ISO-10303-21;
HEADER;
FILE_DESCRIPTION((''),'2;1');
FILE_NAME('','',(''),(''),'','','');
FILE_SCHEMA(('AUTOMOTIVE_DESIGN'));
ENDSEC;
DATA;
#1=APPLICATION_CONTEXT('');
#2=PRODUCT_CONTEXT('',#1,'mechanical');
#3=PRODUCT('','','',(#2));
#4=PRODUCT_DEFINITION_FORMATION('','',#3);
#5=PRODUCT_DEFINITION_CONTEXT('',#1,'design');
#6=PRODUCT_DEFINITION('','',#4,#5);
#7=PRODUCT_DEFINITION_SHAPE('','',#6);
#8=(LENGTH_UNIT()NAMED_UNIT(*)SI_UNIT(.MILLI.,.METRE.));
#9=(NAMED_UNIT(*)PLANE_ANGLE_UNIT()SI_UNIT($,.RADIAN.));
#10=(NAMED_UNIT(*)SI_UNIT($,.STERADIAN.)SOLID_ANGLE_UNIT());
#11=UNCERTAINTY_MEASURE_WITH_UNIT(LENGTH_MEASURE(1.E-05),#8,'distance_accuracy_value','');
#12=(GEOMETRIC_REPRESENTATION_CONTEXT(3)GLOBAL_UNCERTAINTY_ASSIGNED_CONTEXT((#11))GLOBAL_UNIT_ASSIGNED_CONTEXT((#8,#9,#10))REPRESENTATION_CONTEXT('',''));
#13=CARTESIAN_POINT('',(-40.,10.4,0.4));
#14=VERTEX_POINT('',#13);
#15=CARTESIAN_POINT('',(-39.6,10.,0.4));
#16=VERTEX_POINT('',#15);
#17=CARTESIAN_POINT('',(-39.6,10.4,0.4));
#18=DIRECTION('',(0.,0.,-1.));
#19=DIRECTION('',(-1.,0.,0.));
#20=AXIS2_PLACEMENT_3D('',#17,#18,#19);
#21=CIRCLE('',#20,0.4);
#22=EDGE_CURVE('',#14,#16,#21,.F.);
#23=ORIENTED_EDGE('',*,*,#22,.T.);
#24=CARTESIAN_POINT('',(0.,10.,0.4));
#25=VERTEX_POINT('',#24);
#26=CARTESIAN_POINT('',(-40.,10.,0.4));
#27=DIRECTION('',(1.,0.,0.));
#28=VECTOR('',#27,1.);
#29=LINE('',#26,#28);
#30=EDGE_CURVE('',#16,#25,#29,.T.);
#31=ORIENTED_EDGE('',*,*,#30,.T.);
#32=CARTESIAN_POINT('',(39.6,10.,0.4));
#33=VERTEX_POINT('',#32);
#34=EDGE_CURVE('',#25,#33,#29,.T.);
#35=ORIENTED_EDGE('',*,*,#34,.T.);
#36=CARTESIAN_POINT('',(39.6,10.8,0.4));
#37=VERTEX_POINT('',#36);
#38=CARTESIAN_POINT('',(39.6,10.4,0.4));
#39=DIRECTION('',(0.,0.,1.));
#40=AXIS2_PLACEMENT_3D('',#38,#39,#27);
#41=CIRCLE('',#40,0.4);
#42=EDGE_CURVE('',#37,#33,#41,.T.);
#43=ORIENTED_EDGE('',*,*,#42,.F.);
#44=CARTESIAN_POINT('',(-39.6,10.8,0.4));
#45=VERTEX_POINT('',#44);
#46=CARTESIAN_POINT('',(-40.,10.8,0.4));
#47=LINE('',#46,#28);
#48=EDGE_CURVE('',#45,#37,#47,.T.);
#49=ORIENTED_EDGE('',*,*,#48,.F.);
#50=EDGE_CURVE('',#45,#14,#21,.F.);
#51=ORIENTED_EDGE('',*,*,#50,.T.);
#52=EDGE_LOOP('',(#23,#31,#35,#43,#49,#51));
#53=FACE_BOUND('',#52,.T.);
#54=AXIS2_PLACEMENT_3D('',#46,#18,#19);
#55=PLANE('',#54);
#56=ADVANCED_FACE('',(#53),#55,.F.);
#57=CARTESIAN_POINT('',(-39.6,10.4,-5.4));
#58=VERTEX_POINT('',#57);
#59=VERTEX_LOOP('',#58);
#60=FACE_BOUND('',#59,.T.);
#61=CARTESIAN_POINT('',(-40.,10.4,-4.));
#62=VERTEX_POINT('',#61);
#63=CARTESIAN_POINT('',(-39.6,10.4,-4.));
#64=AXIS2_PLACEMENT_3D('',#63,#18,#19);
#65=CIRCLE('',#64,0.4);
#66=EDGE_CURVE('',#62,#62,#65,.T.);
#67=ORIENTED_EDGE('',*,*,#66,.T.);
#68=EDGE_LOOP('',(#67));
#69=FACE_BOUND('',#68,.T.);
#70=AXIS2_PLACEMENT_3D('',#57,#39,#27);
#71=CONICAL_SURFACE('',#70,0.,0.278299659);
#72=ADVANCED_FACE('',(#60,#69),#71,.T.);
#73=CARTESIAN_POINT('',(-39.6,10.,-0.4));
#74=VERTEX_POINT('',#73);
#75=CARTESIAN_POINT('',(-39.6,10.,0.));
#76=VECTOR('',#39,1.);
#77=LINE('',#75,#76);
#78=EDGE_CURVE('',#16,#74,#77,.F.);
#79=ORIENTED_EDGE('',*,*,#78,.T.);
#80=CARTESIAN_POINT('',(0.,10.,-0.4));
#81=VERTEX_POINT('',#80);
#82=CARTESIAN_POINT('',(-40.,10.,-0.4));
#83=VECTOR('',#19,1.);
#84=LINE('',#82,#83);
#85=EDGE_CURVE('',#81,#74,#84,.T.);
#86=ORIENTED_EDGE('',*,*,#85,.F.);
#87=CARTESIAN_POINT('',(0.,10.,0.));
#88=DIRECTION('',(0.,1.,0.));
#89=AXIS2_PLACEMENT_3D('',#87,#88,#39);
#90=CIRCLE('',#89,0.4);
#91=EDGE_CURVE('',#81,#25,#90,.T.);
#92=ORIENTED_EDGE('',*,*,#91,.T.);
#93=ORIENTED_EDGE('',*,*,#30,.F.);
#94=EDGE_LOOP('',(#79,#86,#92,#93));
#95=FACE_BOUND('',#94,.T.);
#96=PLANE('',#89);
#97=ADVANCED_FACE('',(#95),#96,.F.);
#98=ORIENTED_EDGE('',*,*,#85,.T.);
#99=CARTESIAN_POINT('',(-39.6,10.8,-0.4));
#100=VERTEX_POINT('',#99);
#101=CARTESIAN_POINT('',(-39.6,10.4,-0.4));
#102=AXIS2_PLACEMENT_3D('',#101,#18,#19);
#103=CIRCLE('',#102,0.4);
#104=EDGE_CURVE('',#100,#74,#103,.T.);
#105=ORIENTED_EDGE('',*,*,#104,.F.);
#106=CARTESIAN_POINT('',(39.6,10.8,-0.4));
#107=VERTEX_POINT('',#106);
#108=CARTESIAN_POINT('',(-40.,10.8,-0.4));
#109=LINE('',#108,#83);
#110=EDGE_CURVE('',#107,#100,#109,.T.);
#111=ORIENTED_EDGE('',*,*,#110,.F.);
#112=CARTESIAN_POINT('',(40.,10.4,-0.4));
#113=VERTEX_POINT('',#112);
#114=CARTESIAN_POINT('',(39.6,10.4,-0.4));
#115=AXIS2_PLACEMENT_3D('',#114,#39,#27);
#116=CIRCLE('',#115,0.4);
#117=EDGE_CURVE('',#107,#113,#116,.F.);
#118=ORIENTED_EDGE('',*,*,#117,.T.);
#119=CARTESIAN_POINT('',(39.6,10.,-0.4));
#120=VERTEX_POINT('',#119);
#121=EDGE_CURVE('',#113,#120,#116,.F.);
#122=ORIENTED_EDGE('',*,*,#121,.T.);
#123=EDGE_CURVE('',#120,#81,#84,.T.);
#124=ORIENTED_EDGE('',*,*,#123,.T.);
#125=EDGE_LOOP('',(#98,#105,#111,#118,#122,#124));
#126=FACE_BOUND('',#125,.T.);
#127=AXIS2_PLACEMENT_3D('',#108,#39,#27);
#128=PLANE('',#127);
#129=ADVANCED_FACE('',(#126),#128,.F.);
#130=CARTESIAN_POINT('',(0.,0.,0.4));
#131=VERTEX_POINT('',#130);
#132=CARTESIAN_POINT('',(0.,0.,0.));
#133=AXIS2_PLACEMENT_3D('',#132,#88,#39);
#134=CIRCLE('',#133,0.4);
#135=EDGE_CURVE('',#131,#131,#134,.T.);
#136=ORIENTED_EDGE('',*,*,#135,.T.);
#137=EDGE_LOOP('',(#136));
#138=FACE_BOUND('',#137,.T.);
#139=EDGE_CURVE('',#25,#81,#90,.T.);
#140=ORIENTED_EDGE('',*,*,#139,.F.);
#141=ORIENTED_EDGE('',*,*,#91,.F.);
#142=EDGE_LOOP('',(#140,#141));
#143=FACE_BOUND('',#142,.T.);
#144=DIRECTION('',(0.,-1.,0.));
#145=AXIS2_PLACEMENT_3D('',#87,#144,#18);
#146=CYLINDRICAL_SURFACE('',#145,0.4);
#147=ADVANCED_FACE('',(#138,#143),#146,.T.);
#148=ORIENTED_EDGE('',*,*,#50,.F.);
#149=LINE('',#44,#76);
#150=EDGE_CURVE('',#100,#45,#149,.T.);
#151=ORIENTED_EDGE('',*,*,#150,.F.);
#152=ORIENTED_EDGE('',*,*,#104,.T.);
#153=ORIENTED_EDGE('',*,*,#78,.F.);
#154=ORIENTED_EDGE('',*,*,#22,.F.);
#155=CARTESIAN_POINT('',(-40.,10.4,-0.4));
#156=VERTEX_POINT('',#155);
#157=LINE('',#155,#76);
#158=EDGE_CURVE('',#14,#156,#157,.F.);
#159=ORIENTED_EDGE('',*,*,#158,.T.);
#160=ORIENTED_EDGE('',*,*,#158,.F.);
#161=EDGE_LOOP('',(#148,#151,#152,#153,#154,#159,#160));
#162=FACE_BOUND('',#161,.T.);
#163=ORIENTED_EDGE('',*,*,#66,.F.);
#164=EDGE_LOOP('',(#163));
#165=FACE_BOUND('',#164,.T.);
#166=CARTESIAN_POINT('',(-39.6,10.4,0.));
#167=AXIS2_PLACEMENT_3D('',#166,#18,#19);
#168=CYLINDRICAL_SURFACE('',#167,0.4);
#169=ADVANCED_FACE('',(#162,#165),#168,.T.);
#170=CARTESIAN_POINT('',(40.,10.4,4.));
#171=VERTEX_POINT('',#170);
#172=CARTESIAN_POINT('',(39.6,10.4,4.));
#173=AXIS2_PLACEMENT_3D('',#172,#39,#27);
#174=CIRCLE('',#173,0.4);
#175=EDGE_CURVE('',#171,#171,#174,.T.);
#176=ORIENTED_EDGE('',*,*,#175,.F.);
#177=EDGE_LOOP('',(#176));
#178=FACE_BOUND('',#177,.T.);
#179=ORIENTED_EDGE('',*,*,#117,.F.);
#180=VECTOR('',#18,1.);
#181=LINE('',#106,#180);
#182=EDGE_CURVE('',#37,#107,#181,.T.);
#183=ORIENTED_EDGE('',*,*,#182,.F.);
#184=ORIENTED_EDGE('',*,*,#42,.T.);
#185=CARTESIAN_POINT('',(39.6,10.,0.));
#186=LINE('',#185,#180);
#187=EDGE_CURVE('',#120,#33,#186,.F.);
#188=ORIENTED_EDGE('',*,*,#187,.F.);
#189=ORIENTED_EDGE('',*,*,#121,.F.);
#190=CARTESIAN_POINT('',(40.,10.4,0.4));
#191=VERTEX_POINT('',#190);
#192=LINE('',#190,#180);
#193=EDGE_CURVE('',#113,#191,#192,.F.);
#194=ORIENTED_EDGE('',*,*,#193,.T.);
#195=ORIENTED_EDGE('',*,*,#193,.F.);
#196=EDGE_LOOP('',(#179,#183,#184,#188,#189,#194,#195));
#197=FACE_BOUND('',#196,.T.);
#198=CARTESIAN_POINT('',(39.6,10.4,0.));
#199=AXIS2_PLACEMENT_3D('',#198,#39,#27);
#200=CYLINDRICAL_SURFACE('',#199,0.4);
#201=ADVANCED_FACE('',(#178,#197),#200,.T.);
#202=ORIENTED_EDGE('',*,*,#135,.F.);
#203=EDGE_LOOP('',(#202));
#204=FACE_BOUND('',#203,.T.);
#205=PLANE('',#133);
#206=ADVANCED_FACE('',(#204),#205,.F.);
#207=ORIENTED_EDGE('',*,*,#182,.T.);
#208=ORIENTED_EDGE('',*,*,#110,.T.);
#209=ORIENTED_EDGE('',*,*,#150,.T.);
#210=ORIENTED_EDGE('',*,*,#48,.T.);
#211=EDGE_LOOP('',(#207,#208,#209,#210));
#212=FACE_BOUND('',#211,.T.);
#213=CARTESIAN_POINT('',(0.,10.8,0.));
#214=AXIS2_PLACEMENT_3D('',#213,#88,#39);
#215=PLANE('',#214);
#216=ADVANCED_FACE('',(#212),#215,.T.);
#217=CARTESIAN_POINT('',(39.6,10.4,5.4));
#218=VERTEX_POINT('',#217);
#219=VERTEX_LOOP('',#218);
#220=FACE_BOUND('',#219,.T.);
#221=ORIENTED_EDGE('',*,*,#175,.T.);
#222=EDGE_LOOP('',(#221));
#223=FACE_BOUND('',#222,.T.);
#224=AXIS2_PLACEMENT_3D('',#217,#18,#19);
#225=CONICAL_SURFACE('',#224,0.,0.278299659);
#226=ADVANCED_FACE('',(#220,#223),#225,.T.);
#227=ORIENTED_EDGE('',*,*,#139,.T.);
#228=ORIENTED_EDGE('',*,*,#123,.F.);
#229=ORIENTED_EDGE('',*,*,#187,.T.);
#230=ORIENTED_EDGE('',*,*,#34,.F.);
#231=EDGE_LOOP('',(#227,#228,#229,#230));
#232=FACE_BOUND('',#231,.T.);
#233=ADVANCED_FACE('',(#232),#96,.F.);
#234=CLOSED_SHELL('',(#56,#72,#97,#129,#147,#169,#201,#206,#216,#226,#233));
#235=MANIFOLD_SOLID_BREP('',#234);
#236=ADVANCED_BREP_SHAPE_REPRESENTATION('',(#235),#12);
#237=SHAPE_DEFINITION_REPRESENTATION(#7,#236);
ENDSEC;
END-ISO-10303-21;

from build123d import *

# Parameters (mm, degrees)
SKETCH_1_R      = 0.4
EXTRUDE_1_DEPTH = 10
SKETCH_2_W      = 80
SKETCH_2_H      = 0.8
EXTRUDE_2_DEPTH = 0.8
FILLET_1_R      = 0.4
SKETCH_3_R      = 0.4
EXTRUDE_3_DEPTH = 3.6
SKETCH_4_R      = 0.4
EXTRUDE_4_DEPTH = 3.6


with BuildPart() as part:
    # 草图1 → 凸台-拉伸1 (new body)
    with BuildSketch(Plane(origin=(0, 0, 0), x_dir=(1, 0, 0), z_dir=(0, 1, 0))):
        with Locations(Location((0, 0, 0), (0, 0, 270))):
            Circle(SKETCH_1_R)
    extrude(amount=EXTRUDE_1_DEPTH)

    # 草图2 → 凸台-拉伸2 (add)
    with BuildSketch(Plane(origin=(0, 10, 0), x_dir=(1, 0, 0), z_dir=(0, 1, 0))):
        Rectangle(SKETCH_2_W, SKETCH_2_H)
    extrude(amount=EXTRUDE_2_DEPTH)

    # 圆角1
    fillet_1_edges = [part.edges().sort_by_distance(p)[0] for p in [
        (40, 10, 0),
        (40, 10.8, 0),
        (-40, 10, 0),
        (-40, 10.8, 0),
    ]]
    fillet(fillet_1_edges, radius=FILLET_1_R - 0.0001)  # a hair under: the kernel refuses the full size

    # 草图3 → 凸台-拉伸3 (add)
    with BuildSketch(Plane.XY.offset(0.4)):
        with Locations((39.6, 10.4)):
            Circle(SKETCH_3_R)
    extrude(amount=EXTRUDE_3_DEPTH)

    # 草图4 → 凸台-拉伸4 (add)
    with BuildSketch(Plane(origin=(0, 0, -0.4), x_dir=(-1, 0, 0), z_dir=(0, 0, -1))):
        with Locations((39.6, 10.4)):
            Circle(SKETCH_4_R)
    extrude(amount=EXTRUDE_4_DEPTH)

    # 草图5 → 旋转1 (revolve)
    with BuildSketch(Plane(origin=(0, 10.4, 0), x_dir=(1, 0, 0), z_dir=(0, 1, 0))):
        Polygon((39.6, -4), (39.6, -5.4), (40, -4), align=None)
    revolve(axis=Axis((39.6, 10.4, 4), (0, 0, 1)))

    # 草图6 → 旋转2 (revolve)
    with BuildSketch(Plane(origin=(0, 10.4, 0), x_dir=(1, 0, 0), z_dir=(0, 1, 0))):
        Polygon((-39.6, 4), (-39.6, 5.4), (-40, 4), align=None)
    revolve(axis=Axis((-39.6, 10.4, -4), (0, 0, -1)))


solid = part.part
